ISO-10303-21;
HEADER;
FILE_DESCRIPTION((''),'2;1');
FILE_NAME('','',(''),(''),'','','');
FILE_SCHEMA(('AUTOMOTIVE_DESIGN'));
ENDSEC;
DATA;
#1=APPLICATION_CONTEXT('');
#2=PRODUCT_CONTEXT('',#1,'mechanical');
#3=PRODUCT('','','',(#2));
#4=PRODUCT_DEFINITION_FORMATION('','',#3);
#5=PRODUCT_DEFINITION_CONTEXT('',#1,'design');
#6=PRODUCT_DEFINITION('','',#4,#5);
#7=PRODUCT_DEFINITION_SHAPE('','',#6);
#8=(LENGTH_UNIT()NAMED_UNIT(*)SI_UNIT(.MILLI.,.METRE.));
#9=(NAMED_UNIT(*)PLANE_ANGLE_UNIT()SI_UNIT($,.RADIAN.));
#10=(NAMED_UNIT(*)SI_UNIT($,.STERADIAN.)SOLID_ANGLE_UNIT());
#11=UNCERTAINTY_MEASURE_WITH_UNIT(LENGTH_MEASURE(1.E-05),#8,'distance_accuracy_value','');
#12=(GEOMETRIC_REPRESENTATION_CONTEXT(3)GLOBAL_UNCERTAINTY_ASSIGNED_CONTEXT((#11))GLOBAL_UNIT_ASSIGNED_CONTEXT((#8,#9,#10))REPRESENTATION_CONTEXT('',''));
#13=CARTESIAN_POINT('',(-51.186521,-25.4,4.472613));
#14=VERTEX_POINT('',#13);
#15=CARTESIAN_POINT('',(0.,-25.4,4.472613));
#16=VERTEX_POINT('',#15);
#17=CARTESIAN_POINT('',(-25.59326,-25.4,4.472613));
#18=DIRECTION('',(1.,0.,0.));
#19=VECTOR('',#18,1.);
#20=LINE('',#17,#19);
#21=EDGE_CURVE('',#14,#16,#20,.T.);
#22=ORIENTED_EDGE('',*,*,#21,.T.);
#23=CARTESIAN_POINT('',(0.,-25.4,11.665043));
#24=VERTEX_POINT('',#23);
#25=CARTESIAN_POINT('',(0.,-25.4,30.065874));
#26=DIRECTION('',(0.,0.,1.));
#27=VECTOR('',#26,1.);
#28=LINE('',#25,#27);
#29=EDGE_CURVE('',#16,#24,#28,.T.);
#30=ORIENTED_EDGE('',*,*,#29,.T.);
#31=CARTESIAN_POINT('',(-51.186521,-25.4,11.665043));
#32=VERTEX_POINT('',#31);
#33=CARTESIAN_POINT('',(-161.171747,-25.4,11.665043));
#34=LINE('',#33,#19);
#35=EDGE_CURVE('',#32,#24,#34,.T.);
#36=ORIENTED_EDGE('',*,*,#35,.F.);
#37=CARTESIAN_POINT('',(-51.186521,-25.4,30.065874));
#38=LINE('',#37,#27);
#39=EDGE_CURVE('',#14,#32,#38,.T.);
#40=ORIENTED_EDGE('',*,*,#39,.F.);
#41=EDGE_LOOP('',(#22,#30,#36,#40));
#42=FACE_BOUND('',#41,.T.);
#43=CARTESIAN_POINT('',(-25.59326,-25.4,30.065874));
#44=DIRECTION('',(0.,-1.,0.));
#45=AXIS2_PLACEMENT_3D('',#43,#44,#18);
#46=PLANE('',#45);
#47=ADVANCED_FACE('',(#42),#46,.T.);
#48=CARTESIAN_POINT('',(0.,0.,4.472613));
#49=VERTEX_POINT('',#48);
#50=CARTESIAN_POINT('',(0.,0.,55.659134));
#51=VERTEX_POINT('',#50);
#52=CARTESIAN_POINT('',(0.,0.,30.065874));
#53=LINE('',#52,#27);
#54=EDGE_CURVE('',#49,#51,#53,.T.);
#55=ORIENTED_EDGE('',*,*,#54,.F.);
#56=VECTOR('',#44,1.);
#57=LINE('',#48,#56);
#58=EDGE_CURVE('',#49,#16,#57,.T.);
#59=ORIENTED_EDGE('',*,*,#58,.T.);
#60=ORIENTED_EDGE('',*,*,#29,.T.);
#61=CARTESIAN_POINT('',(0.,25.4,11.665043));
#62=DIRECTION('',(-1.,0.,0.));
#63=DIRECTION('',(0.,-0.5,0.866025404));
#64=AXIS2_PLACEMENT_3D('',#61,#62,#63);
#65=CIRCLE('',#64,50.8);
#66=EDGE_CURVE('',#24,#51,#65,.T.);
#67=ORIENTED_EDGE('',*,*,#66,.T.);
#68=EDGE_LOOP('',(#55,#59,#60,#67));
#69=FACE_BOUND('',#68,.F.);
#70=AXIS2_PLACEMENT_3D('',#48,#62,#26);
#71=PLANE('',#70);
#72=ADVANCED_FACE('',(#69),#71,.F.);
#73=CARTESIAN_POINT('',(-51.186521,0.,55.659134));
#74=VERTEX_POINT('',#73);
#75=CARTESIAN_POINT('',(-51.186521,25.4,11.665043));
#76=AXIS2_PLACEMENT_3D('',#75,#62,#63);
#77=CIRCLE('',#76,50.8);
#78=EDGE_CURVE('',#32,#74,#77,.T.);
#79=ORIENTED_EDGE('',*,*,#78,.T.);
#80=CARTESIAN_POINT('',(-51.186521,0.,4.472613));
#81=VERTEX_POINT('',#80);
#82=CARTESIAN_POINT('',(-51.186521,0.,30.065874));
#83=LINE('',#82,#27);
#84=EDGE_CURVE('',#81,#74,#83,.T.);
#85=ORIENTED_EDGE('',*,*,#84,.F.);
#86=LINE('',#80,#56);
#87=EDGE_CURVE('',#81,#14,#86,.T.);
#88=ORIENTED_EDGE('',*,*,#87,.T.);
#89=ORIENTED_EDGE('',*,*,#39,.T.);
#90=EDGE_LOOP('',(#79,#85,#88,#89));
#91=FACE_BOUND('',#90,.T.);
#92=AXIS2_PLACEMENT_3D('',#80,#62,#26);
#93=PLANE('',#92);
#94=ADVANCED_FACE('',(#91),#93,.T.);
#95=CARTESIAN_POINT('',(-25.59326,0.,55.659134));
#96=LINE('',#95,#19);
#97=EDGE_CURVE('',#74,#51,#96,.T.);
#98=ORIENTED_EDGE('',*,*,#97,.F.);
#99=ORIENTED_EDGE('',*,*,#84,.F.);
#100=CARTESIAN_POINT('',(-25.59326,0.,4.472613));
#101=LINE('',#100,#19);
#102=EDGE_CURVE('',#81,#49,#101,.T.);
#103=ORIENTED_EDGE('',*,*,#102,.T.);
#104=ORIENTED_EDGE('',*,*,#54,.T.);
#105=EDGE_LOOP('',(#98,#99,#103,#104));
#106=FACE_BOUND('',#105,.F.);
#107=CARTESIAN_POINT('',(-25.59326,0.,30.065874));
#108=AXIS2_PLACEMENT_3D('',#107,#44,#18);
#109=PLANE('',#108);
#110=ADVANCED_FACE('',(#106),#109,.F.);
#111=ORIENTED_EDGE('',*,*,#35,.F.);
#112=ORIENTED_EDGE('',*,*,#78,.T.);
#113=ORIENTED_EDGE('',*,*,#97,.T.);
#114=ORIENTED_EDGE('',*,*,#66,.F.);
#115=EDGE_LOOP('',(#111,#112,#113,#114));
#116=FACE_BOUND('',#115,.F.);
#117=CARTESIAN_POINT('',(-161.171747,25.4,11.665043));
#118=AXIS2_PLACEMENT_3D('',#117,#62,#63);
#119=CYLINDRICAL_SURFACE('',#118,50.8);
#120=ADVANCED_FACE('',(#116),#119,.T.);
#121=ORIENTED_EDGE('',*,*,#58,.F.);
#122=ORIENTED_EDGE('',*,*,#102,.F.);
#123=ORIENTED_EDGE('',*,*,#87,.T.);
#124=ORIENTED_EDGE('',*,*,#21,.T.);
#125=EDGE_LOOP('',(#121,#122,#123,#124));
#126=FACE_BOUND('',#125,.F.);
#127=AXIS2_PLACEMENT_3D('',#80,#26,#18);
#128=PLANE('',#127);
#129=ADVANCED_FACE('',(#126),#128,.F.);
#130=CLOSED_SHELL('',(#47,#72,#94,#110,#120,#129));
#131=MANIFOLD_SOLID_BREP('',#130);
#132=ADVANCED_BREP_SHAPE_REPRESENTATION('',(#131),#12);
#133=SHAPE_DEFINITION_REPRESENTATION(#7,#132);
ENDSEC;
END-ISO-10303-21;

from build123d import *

# Parameters (mm, degrees)
F0_W        = 51.1865206063
F0_H        = 51.1865206063
F1_DEPTH    = 25.4
F2_T1_DEPTH = 271.1569731675


# Not quite as in the source:
# - a fillet or chamfer that OpenCascade refuses, or shapes differently, is made with other operations: its cross-section is extruded or revolved along the edge and cut away or added


with BuildPart() as f1:
    # F0 (on Front) → F1 (new body)
    with BuildSketch(Plane.XZ):
        with Locations((-25.5932603031, 30.0658736378)):
            Rectangle(F0_W, F0_H)
    extrude(amount=F1_DEPTH)

    # F2: fillet of radius 50.8 on 1 edges, made by hand

    # F2_s2 → F2_t1 (cut)
    with BuildSketch(Plane.YZ.offset(-161.1717468869)):
        with BuildLine():
            ThreePointArc((0, 55.6591339409), (-18.5940905122, 37.0650434287), (-25.4, 11.6650434287))
            Line((-25.4, 11.6650434287), (-25.4, 55.6591339409))
            Line((-25.4, 55.6591339409), (0, 55.6591339409))
        make_face()
    extrude(amount=F2_T1_DEPTH, mode=Mode.SUBTRACT)


solid = f1.part
